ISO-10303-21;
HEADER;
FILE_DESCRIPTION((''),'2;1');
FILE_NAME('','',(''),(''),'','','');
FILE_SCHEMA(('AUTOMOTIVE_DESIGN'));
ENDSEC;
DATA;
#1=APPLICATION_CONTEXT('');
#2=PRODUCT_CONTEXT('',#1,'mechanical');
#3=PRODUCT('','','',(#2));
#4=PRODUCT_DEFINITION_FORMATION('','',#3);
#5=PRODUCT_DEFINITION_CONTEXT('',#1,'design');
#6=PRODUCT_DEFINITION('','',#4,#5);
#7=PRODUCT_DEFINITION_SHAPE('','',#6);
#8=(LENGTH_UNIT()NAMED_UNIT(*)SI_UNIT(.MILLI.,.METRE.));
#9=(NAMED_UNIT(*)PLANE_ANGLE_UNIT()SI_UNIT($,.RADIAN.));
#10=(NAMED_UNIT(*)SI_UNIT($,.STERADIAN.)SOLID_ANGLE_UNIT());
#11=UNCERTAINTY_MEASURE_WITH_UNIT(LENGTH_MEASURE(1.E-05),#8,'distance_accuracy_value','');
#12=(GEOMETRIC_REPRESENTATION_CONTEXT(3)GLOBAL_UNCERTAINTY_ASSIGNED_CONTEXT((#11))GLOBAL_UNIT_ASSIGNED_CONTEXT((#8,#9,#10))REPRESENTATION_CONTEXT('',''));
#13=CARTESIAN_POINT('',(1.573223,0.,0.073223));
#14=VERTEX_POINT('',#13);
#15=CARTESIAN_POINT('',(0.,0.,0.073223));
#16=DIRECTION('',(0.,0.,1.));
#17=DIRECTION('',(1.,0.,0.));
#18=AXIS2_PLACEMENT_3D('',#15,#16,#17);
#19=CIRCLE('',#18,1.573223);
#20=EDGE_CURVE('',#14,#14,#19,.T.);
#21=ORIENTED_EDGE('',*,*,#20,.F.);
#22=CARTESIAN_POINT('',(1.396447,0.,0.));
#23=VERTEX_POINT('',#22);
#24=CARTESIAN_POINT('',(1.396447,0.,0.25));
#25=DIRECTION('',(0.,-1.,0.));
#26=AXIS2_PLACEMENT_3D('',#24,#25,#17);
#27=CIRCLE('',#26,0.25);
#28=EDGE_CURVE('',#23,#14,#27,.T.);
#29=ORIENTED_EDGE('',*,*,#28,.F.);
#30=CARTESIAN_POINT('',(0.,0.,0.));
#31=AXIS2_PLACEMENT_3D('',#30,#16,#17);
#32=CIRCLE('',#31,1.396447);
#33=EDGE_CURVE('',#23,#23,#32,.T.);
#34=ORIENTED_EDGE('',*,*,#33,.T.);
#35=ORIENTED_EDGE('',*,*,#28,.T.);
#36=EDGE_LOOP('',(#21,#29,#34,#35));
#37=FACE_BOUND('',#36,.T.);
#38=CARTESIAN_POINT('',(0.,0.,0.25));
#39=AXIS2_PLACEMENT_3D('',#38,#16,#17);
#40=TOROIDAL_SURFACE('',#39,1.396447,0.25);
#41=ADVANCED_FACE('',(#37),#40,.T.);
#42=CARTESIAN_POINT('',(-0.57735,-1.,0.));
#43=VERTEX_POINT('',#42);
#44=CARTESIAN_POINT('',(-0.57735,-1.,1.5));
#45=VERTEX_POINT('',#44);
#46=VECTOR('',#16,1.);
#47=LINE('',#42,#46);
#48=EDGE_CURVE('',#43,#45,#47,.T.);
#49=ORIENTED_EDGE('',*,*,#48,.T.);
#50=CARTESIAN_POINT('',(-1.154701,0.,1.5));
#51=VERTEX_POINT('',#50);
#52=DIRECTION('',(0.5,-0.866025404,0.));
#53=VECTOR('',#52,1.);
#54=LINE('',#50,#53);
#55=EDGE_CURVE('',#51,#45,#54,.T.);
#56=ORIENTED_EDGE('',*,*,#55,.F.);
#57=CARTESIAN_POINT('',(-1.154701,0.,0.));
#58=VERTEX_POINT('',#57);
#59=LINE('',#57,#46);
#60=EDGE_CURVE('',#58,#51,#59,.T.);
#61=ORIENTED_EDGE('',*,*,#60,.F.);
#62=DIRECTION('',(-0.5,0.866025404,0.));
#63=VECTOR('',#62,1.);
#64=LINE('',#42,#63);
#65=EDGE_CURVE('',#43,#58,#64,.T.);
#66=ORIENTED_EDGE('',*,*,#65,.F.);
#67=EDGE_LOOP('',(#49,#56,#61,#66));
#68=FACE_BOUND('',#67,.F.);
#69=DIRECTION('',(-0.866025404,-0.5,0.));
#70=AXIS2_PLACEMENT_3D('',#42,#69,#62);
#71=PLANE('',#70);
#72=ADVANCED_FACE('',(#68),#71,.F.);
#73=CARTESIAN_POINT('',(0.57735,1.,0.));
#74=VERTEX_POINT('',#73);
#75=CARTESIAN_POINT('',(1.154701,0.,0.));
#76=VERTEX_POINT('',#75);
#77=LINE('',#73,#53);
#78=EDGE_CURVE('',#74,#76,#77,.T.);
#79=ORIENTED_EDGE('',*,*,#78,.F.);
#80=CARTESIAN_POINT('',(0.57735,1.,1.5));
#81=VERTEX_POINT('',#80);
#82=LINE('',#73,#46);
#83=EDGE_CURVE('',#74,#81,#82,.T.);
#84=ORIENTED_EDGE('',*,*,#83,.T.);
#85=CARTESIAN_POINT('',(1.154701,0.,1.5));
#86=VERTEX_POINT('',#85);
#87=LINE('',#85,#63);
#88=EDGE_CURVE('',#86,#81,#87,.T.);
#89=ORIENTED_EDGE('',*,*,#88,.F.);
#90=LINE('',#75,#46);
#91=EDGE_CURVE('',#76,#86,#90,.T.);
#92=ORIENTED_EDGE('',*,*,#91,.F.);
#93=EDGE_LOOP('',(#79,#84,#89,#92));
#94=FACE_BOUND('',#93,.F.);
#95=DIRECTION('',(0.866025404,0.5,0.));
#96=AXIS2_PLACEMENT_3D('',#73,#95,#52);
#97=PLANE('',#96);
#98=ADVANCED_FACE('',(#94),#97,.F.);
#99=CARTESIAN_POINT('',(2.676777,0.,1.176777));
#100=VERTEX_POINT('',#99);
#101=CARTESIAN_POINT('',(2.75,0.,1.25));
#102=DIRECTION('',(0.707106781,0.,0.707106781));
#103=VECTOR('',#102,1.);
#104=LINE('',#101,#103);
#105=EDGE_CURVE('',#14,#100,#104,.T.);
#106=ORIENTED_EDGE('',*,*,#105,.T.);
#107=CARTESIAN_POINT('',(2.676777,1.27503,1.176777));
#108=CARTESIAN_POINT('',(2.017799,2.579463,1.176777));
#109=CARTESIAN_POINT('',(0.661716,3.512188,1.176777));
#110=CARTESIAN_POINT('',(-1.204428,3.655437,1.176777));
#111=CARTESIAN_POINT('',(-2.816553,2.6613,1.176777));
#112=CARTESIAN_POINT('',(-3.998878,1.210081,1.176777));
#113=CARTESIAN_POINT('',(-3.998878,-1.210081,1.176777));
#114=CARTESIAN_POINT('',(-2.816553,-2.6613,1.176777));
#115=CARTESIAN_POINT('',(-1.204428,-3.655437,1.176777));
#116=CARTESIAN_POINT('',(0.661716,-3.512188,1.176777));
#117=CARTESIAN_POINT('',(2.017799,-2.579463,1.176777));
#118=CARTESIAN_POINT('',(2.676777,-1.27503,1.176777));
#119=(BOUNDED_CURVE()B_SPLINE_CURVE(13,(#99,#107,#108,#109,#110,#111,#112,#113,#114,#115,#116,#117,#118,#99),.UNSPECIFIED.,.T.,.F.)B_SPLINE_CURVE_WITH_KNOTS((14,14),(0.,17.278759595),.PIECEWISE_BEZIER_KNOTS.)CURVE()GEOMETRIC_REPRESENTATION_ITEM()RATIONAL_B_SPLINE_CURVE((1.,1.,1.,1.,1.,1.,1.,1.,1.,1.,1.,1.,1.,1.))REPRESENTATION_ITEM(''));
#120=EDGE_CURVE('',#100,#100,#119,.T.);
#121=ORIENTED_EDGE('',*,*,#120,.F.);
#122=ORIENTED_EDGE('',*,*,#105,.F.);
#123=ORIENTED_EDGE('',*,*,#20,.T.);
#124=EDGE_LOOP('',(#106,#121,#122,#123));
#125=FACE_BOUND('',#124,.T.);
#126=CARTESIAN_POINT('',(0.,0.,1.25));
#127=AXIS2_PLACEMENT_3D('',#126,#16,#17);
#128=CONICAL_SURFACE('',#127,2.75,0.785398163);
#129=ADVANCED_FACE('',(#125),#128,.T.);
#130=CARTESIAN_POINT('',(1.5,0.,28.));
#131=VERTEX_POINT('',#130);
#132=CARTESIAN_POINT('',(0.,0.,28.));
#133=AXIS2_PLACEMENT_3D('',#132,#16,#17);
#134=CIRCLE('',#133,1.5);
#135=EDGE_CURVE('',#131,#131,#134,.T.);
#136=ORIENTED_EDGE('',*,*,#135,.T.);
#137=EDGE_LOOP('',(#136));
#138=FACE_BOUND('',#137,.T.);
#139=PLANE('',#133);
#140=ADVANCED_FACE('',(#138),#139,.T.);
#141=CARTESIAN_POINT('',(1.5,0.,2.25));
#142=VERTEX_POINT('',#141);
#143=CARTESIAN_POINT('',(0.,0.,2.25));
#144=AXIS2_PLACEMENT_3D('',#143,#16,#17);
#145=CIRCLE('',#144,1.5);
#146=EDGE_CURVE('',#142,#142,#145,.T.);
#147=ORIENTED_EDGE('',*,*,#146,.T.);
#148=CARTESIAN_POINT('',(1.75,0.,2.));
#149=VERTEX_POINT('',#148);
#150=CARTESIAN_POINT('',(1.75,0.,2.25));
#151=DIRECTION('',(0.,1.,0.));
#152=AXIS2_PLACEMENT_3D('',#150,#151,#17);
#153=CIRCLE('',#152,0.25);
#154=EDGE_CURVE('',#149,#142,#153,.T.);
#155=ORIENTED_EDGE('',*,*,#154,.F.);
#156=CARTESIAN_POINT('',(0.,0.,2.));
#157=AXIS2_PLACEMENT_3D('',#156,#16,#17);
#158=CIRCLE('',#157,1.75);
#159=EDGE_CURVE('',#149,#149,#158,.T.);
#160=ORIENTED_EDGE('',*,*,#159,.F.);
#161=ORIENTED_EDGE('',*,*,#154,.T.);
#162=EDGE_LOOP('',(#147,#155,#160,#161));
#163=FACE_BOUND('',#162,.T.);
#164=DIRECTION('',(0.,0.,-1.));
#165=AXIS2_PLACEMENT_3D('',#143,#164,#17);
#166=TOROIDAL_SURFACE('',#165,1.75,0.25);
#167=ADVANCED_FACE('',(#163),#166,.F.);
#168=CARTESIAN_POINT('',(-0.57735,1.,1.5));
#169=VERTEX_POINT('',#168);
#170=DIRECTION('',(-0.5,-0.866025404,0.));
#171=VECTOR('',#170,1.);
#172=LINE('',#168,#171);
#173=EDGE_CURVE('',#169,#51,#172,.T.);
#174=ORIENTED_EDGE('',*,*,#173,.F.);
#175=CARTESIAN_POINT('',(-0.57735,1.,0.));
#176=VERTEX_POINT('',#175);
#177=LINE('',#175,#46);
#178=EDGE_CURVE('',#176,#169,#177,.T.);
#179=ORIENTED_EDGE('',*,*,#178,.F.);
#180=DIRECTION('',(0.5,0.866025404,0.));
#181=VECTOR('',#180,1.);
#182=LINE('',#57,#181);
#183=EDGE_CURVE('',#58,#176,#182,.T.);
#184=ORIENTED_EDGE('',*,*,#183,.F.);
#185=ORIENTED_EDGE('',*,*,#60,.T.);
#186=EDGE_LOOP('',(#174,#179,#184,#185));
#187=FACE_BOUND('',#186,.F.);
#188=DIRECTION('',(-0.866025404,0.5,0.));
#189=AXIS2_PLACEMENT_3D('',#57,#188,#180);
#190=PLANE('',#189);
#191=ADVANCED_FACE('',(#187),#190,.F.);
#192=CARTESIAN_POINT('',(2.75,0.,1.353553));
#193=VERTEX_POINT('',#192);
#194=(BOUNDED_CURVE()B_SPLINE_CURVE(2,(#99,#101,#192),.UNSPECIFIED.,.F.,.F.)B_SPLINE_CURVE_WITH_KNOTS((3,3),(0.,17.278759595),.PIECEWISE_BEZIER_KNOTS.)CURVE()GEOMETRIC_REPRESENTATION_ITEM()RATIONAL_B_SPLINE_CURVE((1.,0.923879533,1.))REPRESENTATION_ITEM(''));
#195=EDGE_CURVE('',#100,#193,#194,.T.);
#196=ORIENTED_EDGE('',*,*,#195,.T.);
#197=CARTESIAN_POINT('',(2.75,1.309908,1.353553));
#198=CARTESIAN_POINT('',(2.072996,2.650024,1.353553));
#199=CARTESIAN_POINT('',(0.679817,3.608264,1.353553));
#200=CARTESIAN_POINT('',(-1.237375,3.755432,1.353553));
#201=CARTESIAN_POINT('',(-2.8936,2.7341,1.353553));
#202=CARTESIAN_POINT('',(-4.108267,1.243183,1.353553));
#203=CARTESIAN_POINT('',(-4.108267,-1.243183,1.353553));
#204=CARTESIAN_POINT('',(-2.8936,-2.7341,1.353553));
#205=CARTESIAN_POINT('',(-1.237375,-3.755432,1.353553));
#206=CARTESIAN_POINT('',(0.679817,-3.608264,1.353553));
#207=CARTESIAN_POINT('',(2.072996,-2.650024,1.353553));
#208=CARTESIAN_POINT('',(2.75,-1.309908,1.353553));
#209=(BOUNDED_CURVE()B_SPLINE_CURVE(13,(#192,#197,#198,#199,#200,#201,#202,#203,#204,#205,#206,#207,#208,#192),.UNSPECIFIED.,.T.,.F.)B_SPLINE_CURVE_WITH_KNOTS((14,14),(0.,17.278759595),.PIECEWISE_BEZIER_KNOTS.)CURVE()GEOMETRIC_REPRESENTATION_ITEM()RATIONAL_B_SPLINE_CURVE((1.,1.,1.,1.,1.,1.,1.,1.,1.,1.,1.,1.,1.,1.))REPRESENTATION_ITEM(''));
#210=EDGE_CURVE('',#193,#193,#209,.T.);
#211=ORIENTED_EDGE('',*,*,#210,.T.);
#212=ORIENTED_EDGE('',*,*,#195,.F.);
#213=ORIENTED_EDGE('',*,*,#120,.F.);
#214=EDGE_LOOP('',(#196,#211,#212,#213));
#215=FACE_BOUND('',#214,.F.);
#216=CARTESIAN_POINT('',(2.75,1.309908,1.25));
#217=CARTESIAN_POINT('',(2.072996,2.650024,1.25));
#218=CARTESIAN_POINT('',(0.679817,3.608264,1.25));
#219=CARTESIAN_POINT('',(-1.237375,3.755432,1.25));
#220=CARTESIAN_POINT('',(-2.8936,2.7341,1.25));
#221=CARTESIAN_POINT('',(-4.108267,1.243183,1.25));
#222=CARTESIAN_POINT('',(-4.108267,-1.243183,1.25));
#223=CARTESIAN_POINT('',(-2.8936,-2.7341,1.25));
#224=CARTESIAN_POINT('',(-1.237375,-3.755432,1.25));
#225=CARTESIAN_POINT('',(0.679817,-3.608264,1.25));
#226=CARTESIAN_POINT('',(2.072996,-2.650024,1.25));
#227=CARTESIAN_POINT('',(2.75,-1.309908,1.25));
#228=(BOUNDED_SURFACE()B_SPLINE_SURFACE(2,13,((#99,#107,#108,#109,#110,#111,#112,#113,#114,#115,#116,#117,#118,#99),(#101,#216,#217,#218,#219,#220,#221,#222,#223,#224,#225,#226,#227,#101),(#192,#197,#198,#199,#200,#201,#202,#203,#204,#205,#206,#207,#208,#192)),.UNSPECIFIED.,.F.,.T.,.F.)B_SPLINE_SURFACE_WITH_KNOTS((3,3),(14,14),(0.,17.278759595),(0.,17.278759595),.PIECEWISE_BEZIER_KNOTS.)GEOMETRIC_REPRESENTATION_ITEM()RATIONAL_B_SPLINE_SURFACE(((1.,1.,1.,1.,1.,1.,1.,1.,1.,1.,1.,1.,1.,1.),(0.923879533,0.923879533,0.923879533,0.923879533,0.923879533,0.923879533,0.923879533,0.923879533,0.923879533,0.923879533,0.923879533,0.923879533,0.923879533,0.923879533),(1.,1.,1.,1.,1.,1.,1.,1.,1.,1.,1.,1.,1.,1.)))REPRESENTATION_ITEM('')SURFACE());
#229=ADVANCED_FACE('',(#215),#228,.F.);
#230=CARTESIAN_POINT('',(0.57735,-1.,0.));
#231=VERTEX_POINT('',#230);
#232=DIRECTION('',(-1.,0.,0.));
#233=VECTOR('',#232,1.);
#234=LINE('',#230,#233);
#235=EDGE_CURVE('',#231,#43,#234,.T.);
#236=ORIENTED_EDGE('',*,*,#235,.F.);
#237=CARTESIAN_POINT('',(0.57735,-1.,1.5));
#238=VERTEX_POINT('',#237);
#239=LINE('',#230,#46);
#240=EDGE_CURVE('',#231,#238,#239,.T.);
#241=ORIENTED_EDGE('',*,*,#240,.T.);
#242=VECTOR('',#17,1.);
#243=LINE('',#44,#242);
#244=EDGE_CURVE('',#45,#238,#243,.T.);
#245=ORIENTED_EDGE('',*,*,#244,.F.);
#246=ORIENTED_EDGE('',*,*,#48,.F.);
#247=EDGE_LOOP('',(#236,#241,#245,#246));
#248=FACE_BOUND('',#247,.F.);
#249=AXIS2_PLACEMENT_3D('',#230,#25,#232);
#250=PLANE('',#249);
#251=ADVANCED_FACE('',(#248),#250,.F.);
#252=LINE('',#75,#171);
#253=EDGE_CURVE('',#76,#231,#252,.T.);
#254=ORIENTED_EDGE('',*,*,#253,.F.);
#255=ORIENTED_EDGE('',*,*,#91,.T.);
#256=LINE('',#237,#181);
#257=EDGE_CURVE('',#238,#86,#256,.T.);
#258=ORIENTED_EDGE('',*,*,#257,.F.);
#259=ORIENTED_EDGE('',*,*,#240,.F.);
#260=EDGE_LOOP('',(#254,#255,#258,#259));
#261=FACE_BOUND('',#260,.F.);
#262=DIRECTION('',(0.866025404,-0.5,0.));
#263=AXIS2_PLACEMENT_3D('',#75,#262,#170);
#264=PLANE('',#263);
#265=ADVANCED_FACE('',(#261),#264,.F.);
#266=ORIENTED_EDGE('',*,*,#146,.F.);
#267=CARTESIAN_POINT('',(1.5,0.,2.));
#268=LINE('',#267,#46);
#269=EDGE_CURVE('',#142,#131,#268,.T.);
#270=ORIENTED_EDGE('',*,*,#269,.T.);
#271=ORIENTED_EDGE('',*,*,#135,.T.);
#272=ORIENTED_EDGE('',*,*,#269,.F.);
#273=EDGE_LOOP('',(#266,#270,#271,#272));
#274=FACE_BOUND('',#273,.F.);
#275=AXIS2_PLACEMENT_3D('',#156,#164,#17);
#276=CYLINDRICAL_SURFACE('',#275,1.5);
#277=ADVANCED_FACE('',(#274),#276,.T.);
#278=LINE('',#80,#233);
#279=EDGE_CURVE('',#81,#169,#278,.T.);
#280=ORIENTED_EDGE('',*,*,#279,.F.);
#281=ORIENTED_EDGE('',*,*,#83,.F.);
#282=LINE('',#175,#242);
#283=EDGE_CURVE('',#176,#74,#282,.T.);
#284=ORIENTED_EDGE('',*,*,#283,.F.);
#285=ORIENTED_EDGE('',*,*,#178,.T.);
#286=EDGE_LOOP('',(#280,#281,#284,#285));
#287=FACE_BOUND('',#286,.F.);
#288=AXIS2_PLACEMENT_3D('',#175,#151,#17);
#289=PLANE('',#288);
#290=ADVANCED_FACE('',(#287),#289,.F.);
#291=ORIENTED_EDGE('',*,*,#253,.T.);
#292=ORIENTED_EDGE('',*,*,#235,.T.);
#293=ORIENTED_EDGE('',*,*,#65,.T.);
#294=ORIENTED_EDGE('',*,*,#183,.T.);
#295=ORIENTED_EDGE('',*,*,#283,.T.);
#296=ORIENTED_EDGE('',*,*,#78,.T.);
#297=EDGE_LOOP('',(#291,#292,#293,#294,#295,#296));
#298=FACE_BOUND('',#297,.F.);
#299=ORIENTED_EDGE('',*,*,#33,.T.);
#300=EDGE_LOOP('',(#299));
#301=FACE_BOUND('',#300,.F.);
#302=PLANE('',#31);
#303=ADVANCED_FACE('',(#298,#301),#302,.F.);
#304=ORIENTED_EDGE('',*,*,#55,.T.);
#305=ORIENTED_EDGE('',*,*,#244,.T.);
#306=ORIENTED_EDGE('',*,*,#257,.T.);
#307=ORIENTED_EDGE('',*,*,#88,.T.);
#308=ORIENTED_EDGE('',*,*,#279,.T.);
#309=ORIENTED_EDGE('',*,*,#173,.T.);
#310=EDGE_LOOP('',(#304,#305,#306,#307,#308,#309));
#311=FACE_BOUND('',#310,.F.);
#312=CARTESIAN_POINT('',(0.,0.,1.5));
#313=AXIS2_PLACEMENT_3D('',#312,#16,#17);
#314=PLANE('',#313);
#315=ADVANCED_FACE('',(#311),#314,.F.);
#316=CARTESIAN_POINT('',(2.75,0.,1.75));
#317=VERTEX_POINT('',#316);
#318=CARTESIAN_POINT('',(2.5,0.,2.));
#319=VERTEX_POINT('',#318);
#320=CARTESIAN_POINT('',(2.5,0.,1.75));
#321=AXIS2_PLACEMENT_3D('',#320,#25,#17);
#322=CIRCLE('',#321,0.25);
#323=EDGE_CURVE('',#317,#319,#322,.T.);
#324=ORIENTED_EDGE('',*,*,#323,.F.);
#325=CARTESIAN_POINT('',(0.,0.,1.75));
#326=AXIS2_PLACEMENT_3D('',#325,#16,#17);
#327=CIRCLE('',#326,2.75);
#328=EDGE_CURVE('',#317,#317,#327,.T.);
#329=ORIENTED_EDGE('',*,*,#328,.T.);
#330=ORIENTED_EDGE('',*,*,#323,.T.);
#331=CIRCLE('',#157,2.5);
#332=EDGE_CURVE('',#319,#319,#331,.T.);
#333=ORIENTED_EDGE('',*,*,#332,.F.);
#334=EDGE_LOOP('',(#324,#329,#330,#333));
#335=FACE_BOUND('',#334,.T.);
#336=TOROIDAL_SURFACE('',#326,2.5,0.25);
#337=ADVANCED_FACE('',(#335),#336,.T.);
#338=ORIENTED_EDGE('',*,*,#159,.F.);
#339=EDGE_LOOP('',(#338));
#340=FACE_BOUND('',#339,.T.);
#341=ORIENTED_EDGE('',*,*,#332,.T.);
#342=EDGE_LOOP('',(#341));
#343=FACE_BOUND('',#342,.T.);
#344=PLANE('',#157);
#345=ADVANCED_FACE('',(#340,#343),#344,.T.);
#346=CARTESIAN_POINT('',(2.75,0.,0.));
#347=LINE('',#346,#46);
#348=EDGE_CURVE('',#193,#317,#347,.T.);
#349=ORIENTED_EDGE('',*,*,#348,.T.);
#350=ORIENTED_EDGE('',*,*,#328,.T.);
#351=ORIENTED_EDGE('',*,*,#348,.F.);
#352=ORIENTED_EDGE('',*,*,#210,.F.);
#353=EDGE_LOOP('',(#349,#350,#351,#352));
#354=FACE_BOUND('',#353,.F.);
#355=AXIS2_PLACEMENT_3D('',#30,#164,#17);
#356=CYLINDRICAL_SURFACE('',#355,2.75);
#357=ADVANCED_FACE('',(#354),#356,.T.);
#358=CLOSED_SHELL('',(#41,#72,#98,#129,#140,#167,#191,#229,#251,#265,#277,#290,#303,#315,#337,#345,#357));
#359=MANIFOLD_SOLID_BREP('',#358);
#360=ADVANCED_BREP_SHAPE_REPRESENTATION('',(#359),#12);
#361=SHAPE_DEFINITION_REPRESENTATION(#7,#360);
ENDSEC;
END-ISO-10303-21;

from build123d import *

# Parameters (mm, degrees)
F1_R     = 2.75
F1_R_2   = 1.5
F2_DEPTH = 2
F3_START = 1.5
F3_DEPTH = 0.5
F4_START = 2
F4_DEPTH = 26
F5_SIZE2 = 1.25
F5_SIZE  = 1.25
F6_R     = 0.25


# Not quite as in the source:
# - a feature names something its author has since deleted; it is built from what else it names


with BuildPart() as f2:
    # F1 (on Top) → F2 (new body)
    with BuildSketch(Plane.XY):
        Circle(F1_R)
        Circle(F1_R_2, mode=Mode.SUBTRACT)
        Circle(F1_R_2)
        Polygon((-0.5773502692, -1), (-1.1547005384, 0), (-0.5773502692, 1), (0.5773502692, 1), (1.1547005384, 0), (0.5773502692, -1), align=None, mode=Mode.SUBTRACT)
    extrude(amount=F2_DEPTH)

    # F1 (on Top) → F3 (join)
    with BuildSketch(Plane.XY.offset(F3_START)):
        Polygon((-0.5773502692, 1), (-1.1547005384, 0), (-0.5773502692, -1), (0.5773502692, -1), (1.1547005384, 0), (0.5773502692, 1), align=None)
    extrude(amount=F3_DEPTH)

    # F1 (on Top) → F4 (join)
    with BuildSketch(Plane.XY.offset(F4_START)):
        Circle(F1_R_2)
        Polygon((-0.5773502692, -1), (-1.1547005384, 0), (-0.5773502692, 1), (0.5773502692, 1), (1.1547005384, 0), (0.5773502692, -1), align=None, mode=Mode.SUBTRACT)
        Polygon((-0.5773502692, 1), (-1.1547005384, 0), (-0.5773502692, -1), (0.5773502692, -1), (1.1547005384, 0), (0.5773502692, 1), align=None)
    extrude(amount=F4_DEPTH)

    # F5
    f5_edges = [f2.edges().sort_by_distance(p)[0] for p in [
        (-2.75, 0, 0),
    ]]
    chamfer(f5_edges, length=F5_SIZE, length2=F5_SIZE2)

    # F6
    f6_edges = [f2.edges().sort_by_distance(p)[0] for p in [
        (-2.75, 0, 2),
        (-1.5, 0, 2),
        (-1.5, 0, 0),
        (-2.75, 0, 1.25),
    ]]
    fillet(f6_edges, radius=F6_R)


solid = f2.part
